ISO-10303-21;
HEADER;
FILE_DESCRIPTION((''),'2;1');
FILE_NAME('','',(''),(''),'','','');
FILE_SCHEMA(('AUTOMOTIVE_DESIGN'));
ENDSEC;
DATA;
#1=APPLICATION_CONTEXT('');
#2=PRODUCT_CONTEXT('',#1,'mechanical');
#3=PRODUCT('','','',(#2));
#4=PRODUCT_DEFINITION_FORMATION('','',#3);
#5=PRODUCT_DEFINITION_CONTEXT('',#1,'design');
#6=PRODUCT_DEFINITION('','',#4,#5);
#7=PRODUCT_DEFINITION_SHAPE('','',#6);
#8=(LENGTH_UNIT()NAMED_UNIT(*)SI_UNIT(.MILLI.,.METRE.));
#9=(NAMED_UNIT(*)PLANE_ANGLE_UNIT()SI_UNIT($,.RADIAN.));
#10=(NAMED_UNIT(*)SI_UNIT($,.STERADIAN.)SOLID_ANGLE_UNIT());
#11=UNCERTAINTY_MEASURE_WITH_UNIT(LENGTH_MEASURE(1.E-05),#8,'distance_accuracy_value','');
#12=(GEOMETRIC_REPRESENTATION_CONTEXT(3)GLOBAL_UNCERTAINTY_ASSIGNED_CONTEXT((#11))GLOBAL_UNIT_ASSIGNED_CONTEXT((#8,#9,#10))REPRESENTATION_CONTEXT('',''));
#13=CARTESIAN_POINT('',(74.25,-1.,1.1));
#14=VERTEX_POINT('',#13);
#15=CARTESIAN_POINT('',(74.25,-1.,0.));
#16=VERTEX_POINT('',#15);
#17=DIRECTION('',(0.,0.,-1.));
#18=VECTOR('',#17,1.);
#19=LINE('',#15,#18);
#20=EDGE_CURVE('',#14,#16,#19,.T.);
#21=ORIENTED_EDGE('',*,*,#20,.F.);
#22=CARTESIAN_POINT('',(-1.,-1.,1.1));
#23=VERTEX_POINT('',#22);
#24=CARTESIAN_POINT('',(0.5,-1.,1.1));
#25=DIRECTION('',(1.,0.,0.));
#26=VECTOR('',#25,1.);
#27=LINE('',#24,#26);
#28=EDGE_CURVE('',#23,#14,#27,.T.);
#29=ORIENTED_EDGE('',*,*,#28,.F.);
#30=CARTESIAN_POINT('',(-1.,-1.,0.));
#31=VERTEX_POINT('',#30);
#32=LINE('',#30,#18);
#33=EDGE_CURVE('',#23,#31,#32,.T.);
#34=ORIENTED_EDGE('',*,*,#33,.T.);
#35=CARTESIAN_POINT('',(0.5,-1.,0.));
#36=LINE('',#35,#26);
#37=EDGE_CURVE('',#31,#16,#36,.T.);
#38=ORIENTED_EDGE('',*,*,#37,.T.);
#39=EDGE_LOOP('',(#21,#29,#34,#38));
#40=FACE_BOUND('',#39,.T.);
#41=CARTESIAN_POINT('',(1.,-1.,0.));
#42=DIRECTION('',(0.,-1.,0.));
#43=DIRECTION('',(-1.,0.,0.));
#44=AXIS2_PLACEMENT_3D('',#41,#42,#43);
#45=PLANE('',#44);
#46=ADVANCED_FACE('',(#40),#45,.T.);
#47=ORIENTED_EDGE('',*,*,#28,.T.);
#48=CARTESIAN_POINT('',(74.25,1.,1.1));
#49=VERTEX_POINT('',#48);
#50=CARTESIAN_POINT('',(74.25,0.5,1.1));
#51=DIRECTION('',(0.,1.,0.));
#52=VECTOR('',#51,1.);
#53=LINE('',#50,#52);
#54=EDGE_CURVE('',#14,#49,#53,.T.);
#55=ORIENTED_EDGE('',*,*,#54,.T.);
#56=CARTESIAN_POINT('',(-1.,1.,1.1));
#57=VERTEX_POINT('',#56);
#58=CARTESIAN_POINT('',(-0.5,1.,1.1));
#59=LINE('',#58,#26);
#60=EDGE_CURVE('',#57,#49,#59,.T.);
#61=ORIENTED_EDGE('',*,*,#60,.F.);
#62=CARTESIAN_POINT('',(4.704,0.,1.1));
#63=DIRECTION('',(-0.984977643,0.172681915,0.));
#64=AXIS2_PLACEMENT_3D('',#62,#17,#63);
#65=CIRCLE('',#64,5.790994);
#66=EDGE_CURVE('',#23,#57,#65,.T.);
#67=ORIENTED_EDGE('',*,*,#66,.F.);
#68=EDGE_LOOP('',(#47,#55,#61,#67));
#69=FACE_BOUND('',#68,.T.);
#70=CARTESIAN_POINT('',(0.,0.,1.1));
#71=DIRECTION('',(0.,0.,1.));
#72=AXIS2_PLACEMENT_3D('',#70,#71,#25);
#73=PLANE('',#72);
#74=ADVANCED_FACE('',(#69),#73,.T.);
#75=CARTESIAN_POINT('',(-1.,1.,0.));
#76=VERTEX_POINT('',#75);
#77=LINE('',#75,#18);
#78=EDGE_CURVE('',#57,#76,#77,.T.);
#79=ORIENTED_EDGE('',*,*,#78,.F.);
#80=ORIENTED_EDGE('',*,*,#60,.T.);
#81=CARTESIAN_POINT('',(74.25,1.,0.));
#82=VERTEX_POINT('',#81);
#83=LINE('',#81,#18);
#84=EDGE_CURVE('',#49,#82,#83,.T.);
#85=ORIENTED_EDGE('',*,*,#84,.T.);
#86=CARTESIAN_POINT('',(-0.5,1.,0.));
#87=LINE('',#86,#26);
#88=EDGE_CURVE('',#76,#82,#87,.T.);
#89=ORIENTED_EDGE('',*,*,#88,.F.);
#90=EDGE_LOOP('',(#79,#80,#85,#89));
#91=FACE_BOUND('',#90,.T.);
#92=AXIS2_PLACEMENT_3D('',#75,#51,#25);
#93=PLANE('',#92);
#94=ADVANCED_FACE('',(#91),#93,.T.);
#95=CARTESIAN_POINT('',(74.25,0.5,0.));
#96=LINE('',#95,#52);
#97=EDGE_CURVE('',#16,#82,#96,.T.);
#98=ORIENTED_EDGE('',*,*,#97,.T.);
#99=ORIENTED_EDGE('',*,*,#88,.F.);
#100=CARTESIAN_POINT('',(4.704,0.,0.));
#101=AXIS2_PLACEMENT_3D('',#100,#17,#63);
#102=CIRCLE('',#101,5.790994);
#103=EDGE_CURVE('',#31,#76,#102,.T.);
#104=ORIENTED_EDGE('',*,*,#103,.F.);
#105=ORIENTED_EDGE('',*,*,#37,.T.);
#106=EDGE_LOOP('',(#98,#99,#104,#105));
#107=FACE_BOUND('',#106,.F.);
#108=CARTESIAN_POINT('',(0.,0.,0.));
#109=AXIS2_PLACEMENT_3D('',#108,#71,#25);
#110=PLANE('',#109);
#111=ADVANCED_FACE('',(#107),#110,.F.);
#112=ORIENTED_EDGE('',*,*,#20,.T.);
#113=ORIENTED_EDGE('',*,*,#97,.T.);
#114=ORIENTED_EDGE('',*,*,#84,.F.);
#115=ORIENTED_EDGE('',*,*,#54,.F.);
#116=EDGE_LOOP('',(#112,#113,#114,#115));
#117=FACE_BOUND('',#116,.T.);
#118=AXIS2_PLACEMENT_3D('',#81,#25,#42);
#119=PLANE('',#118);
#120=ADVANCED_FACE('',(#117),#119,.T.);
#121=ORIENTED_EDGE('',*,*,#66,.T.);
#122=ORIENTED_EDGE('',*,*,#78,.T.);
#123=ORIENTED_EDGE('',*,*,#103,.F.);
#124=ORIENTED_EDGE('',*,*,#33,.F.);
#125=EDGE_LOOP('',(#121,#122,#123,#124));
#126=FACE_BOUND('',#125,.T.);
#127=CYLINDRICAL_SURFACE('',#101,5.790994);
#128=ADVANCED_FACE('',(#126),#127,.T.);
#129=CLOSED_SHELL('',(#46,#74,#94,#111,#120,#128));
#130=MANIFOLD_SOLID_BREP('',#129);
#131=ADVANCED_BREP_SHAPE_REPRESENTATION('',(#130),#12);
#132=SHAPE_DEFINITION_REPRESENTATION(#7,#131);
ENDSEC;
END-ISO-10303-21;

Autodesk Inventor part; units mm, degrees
ref_plane "YZ Plane" through (0, 0, 0) normal (1, 0, 0) x (0, 1, 0)
ref_plane "XZ Plane" through (0, 0, 0) normal (0, 1, 0) x (-1, 0, 0)
ref_plane "XY Plane" through (0, 0, 0) normal (0, 0, 1) x (1, 0, 0)
sketch "Sketch1" plane through (0, 0, 0) normal (0, 0, 1) x (1, 0, 0)
  line L0 (-2.2452, 0) -> (5.8622, 0) projected
  line L1 (-1, 1) -> (1, 1)
  line L2 (1, 1) -> (1, -1)
  line L3 (1, -1) -> (-1, -1)
  line L4 (-1, -1) -> (-1, 1)
  line L5 (-1, 1) -> (1, -1) construction
  line L6 (1, 1) -> (-1, -1) construction
  arc A0 (-1, 1) -> (-1, -1) centre (4.704, 0) ccw
  point P0 (0, 0)
  dimension "d11" = 2
  dimension "d12" = 2
extrude "Extrusion2" add sketch "Sketch1" along normal blind 1.1
move faces "Move1" translate (73.25, 0, 0) faces at (1, 0.3333, 0.3667)
properties part number "pin_interconnect"
